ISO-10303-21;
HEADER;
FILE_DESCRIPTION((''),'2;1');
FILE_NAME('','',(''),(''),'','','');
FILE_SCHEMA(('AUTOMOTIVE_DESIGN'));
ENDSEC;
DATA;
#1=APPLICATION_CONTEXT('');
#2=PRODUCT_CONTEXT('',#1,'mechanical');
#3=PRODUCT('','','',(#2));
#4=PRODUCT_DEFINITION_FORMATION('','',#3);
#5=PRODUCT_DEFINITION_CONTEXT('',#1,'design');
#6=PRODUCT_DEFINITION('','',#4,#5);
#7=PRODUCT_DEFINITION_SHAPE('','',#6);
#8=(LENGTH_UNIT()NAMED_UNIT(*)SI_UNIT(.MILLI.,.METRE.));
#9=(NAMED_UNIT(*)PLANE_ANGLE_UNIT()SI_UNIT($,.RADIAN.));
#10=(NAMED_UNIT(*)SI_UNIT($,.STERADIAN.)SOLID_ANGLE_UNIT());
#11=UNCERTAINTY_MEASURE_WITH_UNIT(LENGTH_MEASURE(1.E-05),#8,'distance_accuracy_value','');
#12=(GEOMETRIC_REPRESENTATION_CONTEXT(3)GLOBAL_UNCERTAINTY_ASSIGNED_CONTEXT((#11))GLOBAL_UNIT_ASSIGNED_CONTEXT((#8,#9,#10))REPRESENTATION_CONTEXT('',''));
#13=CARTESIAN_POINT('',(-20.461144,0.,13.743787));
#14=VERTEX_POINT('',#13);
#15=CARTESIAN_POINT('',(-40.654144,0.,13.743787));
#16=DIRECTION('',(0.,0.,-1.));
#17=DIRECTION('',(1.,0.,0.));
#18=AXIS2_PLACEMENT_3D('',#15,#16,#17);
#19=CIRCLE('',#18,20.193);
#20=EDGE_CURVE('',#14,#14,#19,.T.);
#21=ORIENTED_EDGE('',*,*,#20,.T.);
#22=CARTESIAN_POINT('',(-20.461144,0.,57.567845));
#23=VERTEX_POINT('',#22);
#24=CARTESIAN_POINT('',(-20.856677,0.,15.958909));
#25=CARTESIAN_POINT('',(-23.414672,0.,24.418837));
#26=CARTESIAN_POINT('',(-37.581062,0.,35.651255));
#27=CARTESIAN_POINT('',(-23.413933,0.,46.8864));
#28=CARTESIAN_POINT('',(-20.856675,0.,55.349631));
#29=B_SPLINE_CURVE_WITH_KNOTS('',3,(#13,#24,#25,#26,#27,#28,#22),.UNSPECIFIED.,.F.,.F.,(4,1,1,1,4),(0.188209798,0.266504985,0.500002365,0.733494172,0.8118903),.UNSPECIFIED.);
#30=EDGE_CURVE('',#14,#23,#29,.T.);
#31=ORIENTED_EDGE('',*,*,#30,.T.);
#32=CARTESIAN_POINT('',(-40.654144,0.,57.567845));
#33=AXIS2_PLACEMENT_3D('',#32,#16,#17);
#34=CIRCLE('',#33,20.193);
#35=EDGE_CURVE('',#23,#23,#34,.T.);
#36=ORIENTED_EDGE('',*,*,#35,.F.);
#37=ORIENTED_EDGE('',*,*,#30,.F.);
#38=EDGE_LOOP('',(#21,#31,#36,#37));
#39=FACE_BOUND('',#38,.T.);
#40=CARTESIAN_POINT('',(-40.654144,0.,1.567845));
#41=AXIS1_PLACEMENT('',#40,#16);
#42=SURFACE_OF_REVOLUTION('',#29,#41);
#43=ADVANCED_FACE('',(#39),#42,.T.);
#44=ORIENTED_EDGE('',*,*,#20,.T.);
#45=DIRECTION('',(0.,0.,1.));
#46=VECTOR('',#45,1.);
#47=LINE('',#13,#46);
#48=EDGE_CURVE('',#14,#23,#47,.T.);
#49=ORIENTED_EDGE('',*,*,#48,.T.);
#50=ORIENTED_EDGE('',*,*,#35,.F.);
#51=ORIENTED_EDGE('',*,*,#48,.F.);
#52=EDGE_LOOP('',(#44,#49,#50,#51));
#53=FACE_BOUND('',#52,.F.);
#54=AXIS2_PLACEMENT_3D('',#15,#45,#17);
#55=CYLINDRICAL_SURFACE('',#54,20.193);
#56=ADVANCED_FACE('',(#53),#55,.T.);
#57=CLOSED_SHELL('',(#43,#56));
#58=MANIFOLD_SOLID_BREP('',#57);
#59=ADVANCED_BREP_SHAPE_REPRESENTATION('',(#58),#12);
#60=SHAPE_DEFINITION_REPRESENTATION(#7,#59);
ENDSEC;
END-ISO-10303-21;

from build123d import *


with BuildPart() as f1:
    # F0 (on Front) → F1 (revolve)
    with BuildSketch(Plane.XZ):
        with BuildLine():
            Line((-20.4611438745, 13.7437874026), (-20.4611438745, 57.5678450522))
            add(Edge.make_bspline(
                [(-20.4611438745, 13.7437874026), (-20.8566771725, 15.9589093815), (-23.4146715047, 24.4188370596), (-37.5810615709, 35.6512550504), (-23.4139334963, 46.8864002179), (-20.8566751777, 55.3496313004), (-20.4611438745, 57.5678450522)],
                knots=[0.188209798, 0.188209798, 0.188209798, 0.188209798, 0.2665049847, 0.5000023645, 0.733494172, 0.8118902995, 0.8118902995, 0.8118902995, 0.8118902995], degree=3))
        make_face()
    revolve(axis=Axis((-40.6541438745, 0, 1.5678450522), (0, 0, -1)))


solid = f1.part
